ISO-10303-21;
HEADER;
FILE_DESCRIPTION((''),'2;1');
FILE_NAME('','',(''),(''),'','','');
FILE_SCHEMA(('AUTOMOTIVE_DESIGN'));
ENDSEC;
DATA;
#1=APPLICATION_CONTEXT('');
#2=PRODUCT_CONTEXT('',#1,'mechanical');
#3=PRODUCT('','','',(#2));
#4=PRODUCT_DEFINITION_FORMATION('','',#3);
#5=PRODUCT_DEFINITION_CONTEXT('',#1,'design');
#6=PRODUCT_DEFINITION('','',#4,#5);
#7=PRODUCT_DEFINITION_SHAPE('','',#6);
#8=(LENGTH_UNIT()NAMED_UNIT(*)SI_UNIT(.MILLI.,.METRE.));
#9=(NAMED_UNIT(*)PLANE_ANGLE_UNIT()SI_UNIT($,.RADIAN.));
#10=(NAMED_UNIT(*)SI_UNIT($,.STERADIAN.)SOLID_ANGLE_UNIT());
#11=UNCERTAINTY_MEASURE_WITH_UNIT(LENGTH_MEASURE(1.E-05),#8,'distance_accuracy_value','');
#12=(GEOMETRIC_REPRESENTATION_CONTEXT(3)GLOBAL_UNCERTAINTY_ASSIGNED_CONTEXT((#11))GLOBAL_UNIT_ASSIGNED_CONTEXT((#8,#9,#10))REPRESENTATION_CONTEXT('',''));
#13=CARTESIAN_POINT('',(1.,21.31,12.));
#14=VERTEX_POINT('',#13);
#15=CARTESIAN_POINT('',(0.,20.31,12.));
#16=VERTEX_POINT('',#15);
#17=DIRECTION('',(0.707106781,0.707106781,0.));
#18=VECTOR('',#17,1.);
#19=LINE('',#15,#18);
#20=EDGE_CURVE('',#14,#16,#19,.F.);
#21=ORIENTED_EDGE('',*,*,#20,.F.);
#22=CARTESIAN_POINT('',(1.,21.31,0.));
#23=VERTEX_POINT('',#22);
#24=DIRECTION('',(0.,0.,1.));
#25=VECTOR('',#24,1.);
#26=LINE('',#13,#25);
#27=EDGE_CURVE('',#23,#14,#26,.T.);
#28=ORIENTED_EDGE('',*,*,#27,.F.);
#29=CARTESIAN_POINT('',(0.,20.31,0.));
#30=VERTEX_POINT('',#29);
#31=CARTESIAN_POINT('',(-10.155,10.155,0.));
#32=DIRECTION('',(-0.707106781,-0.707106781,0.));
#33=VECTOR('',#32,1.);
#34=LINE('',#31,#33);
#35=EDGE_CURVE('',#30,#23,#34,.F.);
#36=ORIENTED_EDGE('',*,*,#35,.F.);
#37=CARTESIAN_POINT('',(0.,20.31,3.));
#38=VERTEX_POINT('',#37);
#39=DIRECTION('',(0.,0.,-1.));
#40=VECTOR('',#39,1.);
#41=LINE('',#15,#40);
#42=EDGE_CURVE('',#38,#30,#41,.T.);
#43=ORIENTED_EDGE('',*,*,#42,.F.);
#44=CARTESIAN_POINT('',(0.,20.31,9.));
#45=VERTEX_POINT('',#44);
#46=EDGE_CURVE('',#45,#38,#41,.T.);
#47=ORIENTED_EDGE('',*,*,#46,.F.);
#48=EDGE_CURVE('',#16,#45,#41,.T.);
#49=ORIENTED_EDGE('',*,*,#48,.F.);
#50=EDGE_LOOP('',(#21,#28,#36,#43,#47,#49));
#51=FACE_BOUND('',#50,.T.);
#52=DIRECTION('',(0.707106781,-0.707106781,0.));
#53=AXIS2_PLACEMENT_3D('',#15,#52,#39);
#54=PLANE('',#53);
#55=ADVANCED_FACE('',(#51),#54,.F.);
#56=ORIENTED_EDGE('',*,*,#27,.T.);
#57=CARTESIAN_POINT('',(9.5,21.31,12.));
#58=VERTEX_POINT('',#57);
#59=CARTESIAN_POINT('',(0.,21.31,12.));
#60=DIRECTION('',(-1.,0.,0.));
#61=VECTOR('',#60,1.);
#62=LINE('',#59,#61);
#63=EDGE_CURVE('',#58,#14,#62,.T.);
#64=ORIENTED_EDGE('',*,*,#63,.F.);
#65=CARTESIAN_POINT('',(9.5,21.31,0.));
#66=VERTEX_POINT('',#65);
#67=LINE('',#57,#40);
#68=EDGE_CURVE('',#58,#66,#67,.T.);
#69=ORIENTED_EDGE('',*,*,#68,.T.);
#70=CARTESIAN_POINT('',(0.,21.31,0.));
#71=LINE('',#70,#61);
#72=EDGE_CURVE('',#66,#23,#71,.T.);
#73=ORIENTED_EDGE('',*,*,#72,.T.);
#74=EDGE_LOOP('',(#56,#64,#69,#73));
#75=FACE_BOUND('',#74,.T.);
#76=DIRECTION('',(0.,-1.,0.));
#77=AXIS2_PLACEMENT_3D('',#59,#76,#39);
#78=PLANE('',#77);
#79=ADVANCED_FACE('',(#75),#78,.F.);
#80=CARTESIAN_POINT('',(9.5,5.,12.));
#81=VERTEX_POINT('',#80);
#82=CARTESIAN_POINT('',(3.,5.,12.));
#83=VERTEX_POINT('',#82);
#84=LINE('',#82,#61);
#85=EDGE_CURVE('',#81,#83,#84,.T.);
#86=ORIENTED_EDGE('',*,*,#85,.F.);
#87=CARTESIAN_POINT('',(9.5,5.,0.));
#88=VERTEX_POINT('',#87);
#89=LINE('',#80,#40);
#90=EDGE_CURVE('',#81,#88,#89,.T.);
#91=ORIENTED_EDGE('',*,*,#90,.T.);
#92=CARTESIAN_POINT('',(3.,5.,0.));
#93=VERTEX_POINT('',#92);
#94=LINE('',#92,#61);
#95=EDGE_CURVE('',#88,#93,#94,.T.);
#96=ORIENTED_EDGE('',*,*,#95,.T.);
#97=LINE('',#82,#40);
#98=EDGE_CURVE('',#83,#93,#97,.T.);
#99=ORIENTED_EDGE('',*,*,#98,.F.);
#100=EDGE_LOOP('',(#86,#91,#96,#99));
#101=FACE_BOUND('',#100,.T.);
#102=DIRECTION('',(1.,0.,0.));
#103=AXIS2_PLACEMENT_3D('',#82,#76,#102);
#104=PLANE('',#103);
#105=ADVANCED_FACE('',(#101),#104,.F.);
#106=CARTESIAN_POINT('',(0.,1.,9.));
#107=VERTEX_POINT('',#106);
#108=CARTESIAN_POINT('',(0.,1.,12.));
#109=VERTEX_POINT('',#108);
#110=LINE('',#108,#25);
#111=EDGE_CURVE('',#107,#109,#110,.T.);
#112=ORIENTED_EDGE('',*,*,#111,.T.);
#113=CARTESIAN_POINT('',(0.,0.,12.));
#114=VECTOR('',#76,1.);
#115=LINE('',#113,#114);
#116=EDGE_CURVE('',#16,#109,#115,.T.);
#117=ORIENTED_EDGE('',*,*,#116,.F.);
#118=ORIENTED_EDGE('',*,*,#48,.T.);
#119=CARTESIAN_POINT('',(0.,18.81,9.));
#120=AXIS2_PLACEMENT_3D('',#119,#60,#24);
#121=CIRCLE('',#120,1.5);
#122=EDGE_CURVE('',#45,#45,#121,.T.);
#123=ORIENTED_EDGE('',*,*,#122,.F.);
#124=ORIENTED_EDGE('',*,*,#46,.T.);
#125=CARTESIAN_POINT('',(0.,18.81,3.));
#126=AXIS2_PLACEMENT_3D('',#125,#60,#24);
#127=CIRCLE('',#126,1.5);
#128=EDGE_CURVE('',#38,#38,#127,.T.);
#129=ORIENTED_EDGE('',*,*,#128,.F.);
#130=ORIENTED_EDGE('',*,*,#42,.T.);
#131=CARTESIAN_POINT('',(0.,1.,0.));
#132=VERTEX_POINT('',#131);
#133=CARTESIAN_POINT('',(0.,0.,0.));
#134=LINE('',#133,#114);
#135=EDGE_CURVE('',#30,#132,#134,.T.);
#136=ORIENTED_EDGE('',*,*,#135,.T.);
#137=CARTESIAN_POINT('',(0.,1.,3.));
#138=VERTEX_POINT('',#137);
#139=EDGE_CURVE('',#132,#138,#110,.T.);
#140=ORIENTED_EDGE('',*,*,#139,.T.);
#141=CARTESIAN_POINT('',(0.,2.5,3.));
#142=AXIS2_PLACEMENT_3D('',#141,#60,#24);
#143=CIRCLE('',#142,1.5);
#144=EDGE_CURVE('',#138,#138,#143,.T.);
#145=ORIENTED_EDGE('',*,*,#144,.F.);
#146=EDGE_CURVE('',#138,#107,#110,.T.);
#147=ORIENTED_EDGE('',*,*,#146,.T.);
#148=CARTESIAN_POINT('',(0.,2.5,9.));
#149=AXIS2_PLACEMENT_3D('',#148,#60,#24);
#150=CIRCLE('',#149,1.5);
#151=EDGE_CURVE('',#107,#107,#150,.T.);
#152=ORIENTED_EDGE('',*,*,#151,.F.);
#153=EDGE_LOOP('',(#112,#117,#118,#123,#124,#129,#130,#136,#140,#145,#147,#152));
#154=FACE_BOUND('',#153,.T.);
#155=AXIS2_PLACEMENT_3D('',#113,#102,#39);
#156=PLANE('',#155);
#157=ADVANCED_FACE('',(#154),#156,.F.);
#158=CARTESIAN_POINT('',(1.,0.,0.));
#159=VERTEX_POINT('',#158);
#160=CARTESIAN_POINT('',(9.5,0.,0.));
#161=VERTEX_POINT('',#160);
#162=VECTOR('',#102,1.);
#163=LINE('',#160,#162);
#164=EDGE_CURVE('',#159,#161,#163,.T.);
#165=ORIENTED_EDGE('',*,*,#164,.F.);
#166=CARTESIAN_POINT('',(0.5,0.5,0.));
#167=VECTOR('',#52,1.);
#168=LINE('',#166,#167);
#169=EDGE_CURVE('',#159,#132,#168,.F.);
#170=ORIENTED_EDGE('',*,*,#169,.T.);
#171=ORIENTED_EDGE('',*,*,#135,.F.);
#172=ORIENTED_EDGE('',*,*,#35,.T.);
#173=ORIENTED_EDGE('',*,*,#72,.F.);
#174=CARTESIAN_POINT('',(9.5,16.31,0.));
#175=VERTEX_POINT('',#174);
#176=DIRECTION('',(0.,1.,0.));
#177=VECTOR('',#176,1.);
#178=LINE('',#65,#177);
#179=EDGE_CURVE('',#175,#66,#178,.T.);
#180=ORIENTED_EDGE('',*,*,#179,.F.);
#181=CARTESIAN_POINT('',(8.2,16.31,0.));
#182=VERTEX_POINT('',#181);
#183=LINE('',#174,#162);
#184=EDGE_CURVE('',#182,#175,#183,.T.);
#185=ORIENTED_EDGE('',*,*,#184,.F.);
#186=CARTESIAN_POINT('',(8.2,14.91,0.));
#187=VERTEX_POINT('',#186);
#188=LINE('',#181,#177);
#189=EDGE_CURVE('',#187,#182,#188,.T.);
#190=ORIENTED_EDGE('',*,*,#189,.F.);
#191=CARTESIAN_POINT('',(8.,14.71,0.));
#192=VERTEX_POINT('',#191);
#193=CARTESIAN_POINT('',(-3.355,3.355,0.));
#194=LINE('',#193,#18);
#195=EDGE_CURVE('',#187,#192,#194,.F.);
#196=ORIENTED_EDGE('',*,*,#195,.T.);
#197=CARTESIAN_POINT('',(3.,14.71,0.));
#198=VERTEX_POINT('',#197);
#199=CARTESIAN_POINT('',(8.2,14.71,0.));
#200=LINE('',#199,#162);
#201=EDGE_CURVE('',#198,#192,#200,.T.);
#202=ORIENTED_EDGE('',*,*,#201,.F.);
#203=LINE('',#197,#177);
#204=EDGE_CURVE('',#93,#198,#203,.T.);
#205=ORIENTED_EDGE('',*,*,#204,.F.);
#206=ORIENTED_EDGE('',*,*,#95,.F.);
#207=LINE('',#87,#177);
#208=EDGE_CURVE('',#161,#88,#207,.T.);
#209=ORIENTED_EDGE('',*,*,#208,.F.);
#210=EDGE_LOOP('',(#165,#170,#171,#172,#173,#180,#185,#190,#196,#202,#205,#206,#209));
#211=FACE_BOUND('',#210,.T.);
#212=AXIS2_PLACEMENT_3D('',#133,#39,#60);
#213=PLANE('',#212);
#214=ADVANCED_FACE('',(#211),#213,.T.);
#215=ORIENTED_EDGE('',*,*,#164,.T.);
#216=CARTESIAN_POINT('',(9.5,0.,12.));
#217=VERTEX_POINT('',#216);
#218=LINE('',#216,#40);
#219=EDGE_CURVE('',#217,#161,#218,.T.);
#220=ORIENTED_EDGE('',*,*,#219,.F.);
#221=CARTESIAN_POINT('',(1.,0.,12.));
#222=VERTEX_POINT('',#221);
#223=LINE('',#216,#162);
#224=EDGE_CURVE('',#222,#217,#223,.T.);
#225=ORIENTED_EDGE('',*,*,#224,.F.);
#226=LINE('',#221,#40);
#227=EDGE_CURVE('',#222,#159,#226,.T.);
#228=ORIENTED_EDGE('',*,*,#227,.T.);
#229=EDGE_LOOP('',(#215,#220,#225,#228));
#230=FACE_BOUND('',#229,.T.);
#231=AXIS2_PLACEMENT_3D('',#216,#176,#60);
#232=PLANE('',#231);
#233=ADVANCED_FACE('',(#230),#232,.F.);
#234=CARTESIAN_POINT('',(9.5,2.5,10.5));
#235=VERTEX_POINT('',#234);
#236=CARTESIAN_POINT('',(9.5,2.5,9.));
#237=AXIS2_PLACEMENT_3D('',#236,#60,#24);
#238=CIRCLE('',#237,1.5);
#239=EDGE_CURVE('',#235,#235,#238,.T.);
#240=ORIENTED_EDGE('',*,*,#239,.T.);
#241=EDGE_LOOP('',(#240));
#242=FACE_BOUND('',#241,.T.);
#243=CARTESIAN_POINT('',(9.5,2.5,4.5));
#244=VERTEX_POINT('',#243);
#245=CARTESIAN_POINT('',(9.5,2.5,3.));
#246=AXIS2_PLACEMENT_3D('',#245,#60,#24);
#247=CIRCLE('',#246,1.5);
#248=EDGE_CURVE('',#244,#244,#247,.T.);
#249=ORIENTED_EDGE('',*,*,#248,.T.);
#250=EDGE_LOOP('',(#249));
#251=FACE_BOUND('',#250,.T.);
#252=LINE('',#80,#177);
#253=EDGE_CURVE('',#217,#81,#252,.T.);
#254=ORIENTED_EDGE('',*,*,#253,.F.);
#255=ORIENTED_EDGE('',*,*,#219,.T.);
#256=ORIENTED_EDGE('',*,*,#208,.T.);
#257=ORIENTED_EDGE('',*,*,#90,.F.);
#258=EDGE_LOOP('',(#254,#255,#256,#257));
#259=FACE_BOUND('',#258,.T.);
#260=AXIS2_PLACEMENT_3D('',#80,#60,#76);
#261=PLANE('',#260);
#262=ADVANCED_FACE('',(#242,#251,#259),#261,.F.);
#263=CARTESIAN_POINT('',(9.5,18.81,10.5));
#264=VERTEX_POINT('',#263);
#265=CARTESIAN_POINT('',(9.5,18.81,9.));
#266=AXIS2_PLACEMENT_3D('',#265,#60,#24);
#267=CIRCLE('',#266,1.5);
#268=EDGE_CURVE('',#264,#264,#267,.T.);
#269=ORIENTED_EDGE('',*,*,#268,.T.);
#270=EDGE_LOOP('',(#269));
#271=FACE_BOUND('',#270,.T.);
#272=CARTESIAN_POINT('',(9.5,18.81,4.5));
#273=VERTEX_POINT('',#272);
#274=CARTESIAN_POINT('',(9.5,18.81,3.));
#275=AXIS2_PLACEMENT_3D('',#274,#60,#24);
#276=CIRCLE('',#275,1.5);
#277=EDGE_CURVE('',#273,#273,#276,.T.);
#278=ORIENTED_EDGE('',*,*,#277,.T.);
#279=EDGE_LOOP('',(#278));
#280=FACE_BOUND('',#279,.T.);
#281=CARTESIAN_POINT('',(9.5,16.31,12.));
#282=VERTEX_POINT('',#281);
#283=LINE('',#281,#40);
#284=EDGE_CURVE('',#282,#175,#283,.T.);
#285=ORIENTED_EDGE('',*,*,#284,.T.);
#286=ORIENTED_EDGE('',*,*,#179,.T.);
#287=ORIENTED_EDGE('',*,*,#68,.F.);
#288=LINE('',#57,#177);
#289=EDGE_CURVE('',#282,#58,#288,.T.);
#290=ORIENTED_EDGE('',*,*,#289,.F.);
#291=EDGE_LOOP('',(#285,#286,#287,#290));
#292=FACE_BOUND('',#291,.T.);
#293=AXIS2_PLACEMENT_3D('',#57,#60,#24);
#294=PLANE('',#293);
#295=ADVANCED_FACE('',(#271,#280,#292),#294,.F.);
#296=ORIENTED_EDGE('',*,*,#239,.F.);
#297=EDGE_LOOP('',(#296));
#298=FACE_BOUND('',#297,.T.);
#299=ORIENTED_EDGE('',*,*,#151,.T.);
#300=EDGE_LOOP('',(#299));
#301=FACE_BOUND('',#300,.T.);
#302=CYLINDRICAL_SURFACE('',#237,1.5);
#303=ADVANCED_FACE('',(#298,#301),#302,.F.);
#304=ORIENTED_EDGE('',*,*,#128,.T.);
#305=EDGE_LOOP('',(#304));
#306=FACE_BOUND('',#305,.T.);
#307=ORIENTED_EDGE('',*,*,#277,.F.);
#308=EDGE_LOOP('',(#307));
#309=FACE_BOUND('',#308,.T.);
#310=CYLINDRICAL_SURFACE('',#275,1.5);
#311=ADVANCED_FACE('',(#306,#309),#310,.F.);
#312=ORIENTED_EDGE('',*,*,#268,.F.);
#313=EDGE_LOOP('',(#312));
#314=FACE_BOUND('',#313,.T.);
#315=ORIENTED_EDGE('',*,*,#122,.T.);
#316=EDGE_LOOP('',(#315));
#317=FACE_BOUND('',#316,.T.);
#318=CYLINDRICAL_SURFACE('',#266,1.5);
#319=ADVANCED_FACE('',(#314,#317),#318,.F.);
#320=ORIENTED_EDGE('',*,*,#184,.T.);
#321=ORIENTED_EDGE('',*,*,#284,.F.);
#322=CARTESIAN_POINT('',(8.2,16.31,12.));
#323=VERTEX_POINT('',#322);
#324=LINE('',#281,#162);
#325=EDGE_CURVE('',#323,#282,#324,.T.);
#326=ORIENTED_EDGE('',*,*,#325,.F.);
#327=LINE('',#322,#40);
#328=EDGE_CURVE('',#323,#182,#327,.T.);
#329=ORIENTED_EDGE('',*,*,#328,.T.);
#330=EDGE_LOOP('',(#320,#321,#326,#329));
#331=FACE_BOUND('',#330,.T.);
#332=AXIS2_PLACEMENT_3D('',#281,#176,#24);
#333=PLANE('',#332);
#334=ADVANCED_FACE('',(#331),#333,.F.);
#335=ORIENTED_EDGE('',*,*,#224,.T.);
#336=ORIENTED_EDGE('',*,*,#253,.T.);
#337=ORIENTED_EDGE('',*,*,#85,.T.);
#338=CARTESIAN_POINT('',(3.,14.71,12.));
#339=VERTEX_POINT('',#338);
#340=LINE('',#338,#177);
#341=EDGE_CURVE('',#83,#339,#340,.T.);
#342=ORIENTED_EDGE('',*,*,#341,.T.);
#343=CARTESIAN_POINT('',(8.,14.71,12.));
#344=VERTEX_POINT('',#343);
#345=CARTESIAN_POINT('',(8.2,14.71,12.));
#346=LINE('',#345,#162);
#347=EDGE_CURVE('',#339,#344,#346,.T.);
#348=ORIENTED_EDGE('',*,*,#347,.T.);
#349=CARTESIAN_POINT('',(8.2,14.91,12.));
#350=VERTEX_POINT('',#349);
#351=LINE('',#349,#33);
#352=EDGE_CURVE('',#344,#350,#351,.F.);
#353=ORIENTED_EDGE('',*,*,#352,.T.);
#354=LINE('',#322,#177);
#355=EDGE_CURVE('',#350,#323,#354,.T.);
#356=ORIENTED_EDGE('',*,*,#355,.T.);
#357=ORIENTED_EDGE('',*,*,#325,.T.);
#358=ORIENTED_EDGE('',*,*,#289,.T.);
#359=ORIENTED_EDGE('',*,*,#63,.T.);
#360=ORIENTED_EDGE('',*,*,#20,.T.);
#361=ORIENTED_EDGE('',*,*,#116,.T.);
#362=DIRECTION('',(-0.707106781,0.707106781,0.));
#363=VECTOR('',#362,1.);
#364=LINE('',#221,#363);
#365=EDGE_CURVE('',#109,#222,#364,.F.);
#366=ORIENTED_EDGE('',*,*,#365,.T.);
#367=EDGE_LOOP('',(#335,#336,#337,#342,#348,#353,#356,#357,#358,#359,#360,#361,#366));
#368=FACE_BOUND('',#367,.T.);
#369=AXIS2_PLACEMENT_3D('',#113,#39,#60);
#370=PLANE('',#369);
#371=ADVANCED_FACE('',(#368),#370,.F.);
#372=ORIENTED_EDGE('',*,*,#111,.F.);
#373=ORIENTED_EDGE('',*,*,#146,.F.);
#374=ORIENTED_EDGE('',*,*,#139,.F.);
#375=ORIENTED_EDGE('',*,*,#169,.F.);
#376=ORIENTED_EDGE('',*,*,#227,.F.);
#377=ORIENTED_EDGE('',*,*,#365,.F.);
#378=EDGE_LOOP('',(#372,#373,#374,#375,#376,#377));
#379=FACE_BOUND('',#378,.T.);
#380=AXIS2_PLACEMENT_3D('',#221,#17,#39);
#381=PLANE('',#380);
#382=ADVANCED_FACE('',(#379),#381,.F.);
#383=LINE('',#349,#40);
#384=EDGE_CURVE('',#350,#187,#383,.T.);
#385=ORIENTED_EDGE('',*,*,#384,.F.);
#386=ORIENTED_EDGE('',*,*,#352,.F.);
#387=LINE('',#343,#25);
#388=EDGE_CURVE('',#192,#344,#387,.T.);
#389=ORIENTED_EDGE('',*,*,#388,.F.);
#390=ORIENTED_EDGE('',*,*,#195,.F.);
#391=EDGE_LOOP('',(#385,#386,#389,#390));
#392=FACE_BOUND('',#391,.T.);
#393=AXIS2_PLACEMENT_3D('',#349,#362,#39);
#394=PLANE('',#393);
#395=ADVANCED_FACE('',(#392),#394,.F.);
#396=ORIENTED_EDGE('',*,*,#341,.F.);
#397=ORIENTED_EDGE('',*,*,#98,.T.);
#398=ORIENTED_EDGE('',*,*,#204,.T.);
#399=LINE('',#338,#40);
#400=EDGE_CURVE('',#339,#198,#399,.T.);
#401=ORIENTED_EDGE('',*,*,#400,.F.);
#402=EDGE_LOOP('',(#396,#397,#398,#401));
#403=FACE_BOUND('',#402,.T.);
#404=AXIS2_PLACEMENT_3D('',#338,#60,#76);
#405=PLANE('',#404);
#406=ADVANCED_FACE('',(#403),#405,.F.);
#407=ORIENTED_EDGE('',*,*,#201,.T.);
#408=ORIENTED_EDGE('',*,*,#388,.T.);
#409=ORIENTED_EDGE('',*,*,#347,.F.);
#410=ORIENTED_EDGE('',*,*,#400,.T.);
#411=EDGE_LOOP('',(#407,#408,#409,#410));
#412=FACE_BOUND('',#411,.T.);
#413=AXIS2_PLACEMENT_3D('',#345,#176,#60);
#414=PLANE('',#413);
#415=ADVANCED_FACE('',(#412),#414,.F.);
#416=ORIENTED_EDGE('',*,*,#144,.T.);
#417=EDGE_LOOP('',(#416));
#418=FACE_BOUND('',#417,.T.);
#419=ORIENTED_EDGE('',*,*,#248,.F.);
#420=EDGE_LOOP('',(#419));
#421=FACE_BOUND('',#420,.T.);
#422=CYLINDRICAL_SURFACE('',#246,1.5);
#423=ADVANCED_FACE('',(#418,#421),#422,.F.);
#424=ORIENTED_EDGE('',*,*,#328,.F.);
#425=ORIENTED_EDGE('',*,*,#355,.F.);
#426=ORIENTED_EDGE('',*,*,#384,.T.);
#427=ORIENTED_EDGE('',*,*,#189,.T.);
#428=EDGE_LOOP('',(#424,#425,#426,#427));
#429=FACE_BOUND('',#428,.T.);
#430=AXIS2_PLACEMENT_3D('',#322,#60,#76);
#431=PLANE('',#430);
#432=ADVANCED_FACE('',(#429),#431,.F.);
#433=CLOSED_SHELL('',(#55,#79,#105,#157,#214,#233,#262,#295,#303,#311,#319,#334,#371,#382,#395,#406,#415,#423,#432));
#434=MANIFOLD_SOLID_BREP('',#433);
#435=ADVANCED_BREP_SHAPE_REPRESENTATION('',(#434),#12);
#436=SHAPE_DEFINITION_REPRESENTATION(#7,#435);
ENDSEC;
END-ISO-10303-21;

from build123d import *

# Parameters (mm, degrees)
EXTRUDE_1_DEPTH     = 12
CHAMFER_1_SIZE      = 0.2
SKETCH_2_R          = 1.5
CUT_EXTRUDE_1_DEPTH = 27.236731885
CHAMFER_2_SIZE      = 1


with BuildPart() as part:
    # 草图1 → 凸台-拉伸1 (new body)
    with BuildSketch(Plane.XY):
        Polygon((0, 0), (0, 21.31), (9.5, 21.31), (9.5, 16.31), (8.2, 16.31), (8.2, 14.71), (3, 14.71), (3, 5), (9.5, 5), (9.5, 0), align=None)
    extrude(amount=EXTRUDE_1_DEPTH)

    # 倒角1
    chamfer_1_edges = [part.edges().sort_by_distance(p)[0] for p in [
        (8.2, 14.71, 6),
    ]]
    chamfer(chamfer_1_edges, length=CHAMFER_1_SIZE)

    # 草图2 → 切除-拉伸1 (cut, through all)
    with BuildSketch(Plane.ZY):
        with Locations((9, 18.81)):
            Circle(SKETCH_2_R)
        with Locations((3, 18.81)):
            Circle(SKETCH_2_R)
        with Locations((3, 2.5)):
            Circle(SKETCH_2_R)
        with Locations((9, 2.5)):
            Circle(SKETCH_2_R)
    extrude(amount=-CUT_EXTRUDE_1_DEPTH, mode=Mode.SUBTRACT)

    # 倒角2
    chamfer_2_edges = [part.edges().sort_by_distance(p)[0] for p in [
        (0, 0, 6),
        (0, 21.31, 6),
    ]]
    chamfer(chamfer_2_edges, length=CHAMFER_2_SIZE - 0.0001)  # a hair under: the kernel refuses the full size


solid = part.part
